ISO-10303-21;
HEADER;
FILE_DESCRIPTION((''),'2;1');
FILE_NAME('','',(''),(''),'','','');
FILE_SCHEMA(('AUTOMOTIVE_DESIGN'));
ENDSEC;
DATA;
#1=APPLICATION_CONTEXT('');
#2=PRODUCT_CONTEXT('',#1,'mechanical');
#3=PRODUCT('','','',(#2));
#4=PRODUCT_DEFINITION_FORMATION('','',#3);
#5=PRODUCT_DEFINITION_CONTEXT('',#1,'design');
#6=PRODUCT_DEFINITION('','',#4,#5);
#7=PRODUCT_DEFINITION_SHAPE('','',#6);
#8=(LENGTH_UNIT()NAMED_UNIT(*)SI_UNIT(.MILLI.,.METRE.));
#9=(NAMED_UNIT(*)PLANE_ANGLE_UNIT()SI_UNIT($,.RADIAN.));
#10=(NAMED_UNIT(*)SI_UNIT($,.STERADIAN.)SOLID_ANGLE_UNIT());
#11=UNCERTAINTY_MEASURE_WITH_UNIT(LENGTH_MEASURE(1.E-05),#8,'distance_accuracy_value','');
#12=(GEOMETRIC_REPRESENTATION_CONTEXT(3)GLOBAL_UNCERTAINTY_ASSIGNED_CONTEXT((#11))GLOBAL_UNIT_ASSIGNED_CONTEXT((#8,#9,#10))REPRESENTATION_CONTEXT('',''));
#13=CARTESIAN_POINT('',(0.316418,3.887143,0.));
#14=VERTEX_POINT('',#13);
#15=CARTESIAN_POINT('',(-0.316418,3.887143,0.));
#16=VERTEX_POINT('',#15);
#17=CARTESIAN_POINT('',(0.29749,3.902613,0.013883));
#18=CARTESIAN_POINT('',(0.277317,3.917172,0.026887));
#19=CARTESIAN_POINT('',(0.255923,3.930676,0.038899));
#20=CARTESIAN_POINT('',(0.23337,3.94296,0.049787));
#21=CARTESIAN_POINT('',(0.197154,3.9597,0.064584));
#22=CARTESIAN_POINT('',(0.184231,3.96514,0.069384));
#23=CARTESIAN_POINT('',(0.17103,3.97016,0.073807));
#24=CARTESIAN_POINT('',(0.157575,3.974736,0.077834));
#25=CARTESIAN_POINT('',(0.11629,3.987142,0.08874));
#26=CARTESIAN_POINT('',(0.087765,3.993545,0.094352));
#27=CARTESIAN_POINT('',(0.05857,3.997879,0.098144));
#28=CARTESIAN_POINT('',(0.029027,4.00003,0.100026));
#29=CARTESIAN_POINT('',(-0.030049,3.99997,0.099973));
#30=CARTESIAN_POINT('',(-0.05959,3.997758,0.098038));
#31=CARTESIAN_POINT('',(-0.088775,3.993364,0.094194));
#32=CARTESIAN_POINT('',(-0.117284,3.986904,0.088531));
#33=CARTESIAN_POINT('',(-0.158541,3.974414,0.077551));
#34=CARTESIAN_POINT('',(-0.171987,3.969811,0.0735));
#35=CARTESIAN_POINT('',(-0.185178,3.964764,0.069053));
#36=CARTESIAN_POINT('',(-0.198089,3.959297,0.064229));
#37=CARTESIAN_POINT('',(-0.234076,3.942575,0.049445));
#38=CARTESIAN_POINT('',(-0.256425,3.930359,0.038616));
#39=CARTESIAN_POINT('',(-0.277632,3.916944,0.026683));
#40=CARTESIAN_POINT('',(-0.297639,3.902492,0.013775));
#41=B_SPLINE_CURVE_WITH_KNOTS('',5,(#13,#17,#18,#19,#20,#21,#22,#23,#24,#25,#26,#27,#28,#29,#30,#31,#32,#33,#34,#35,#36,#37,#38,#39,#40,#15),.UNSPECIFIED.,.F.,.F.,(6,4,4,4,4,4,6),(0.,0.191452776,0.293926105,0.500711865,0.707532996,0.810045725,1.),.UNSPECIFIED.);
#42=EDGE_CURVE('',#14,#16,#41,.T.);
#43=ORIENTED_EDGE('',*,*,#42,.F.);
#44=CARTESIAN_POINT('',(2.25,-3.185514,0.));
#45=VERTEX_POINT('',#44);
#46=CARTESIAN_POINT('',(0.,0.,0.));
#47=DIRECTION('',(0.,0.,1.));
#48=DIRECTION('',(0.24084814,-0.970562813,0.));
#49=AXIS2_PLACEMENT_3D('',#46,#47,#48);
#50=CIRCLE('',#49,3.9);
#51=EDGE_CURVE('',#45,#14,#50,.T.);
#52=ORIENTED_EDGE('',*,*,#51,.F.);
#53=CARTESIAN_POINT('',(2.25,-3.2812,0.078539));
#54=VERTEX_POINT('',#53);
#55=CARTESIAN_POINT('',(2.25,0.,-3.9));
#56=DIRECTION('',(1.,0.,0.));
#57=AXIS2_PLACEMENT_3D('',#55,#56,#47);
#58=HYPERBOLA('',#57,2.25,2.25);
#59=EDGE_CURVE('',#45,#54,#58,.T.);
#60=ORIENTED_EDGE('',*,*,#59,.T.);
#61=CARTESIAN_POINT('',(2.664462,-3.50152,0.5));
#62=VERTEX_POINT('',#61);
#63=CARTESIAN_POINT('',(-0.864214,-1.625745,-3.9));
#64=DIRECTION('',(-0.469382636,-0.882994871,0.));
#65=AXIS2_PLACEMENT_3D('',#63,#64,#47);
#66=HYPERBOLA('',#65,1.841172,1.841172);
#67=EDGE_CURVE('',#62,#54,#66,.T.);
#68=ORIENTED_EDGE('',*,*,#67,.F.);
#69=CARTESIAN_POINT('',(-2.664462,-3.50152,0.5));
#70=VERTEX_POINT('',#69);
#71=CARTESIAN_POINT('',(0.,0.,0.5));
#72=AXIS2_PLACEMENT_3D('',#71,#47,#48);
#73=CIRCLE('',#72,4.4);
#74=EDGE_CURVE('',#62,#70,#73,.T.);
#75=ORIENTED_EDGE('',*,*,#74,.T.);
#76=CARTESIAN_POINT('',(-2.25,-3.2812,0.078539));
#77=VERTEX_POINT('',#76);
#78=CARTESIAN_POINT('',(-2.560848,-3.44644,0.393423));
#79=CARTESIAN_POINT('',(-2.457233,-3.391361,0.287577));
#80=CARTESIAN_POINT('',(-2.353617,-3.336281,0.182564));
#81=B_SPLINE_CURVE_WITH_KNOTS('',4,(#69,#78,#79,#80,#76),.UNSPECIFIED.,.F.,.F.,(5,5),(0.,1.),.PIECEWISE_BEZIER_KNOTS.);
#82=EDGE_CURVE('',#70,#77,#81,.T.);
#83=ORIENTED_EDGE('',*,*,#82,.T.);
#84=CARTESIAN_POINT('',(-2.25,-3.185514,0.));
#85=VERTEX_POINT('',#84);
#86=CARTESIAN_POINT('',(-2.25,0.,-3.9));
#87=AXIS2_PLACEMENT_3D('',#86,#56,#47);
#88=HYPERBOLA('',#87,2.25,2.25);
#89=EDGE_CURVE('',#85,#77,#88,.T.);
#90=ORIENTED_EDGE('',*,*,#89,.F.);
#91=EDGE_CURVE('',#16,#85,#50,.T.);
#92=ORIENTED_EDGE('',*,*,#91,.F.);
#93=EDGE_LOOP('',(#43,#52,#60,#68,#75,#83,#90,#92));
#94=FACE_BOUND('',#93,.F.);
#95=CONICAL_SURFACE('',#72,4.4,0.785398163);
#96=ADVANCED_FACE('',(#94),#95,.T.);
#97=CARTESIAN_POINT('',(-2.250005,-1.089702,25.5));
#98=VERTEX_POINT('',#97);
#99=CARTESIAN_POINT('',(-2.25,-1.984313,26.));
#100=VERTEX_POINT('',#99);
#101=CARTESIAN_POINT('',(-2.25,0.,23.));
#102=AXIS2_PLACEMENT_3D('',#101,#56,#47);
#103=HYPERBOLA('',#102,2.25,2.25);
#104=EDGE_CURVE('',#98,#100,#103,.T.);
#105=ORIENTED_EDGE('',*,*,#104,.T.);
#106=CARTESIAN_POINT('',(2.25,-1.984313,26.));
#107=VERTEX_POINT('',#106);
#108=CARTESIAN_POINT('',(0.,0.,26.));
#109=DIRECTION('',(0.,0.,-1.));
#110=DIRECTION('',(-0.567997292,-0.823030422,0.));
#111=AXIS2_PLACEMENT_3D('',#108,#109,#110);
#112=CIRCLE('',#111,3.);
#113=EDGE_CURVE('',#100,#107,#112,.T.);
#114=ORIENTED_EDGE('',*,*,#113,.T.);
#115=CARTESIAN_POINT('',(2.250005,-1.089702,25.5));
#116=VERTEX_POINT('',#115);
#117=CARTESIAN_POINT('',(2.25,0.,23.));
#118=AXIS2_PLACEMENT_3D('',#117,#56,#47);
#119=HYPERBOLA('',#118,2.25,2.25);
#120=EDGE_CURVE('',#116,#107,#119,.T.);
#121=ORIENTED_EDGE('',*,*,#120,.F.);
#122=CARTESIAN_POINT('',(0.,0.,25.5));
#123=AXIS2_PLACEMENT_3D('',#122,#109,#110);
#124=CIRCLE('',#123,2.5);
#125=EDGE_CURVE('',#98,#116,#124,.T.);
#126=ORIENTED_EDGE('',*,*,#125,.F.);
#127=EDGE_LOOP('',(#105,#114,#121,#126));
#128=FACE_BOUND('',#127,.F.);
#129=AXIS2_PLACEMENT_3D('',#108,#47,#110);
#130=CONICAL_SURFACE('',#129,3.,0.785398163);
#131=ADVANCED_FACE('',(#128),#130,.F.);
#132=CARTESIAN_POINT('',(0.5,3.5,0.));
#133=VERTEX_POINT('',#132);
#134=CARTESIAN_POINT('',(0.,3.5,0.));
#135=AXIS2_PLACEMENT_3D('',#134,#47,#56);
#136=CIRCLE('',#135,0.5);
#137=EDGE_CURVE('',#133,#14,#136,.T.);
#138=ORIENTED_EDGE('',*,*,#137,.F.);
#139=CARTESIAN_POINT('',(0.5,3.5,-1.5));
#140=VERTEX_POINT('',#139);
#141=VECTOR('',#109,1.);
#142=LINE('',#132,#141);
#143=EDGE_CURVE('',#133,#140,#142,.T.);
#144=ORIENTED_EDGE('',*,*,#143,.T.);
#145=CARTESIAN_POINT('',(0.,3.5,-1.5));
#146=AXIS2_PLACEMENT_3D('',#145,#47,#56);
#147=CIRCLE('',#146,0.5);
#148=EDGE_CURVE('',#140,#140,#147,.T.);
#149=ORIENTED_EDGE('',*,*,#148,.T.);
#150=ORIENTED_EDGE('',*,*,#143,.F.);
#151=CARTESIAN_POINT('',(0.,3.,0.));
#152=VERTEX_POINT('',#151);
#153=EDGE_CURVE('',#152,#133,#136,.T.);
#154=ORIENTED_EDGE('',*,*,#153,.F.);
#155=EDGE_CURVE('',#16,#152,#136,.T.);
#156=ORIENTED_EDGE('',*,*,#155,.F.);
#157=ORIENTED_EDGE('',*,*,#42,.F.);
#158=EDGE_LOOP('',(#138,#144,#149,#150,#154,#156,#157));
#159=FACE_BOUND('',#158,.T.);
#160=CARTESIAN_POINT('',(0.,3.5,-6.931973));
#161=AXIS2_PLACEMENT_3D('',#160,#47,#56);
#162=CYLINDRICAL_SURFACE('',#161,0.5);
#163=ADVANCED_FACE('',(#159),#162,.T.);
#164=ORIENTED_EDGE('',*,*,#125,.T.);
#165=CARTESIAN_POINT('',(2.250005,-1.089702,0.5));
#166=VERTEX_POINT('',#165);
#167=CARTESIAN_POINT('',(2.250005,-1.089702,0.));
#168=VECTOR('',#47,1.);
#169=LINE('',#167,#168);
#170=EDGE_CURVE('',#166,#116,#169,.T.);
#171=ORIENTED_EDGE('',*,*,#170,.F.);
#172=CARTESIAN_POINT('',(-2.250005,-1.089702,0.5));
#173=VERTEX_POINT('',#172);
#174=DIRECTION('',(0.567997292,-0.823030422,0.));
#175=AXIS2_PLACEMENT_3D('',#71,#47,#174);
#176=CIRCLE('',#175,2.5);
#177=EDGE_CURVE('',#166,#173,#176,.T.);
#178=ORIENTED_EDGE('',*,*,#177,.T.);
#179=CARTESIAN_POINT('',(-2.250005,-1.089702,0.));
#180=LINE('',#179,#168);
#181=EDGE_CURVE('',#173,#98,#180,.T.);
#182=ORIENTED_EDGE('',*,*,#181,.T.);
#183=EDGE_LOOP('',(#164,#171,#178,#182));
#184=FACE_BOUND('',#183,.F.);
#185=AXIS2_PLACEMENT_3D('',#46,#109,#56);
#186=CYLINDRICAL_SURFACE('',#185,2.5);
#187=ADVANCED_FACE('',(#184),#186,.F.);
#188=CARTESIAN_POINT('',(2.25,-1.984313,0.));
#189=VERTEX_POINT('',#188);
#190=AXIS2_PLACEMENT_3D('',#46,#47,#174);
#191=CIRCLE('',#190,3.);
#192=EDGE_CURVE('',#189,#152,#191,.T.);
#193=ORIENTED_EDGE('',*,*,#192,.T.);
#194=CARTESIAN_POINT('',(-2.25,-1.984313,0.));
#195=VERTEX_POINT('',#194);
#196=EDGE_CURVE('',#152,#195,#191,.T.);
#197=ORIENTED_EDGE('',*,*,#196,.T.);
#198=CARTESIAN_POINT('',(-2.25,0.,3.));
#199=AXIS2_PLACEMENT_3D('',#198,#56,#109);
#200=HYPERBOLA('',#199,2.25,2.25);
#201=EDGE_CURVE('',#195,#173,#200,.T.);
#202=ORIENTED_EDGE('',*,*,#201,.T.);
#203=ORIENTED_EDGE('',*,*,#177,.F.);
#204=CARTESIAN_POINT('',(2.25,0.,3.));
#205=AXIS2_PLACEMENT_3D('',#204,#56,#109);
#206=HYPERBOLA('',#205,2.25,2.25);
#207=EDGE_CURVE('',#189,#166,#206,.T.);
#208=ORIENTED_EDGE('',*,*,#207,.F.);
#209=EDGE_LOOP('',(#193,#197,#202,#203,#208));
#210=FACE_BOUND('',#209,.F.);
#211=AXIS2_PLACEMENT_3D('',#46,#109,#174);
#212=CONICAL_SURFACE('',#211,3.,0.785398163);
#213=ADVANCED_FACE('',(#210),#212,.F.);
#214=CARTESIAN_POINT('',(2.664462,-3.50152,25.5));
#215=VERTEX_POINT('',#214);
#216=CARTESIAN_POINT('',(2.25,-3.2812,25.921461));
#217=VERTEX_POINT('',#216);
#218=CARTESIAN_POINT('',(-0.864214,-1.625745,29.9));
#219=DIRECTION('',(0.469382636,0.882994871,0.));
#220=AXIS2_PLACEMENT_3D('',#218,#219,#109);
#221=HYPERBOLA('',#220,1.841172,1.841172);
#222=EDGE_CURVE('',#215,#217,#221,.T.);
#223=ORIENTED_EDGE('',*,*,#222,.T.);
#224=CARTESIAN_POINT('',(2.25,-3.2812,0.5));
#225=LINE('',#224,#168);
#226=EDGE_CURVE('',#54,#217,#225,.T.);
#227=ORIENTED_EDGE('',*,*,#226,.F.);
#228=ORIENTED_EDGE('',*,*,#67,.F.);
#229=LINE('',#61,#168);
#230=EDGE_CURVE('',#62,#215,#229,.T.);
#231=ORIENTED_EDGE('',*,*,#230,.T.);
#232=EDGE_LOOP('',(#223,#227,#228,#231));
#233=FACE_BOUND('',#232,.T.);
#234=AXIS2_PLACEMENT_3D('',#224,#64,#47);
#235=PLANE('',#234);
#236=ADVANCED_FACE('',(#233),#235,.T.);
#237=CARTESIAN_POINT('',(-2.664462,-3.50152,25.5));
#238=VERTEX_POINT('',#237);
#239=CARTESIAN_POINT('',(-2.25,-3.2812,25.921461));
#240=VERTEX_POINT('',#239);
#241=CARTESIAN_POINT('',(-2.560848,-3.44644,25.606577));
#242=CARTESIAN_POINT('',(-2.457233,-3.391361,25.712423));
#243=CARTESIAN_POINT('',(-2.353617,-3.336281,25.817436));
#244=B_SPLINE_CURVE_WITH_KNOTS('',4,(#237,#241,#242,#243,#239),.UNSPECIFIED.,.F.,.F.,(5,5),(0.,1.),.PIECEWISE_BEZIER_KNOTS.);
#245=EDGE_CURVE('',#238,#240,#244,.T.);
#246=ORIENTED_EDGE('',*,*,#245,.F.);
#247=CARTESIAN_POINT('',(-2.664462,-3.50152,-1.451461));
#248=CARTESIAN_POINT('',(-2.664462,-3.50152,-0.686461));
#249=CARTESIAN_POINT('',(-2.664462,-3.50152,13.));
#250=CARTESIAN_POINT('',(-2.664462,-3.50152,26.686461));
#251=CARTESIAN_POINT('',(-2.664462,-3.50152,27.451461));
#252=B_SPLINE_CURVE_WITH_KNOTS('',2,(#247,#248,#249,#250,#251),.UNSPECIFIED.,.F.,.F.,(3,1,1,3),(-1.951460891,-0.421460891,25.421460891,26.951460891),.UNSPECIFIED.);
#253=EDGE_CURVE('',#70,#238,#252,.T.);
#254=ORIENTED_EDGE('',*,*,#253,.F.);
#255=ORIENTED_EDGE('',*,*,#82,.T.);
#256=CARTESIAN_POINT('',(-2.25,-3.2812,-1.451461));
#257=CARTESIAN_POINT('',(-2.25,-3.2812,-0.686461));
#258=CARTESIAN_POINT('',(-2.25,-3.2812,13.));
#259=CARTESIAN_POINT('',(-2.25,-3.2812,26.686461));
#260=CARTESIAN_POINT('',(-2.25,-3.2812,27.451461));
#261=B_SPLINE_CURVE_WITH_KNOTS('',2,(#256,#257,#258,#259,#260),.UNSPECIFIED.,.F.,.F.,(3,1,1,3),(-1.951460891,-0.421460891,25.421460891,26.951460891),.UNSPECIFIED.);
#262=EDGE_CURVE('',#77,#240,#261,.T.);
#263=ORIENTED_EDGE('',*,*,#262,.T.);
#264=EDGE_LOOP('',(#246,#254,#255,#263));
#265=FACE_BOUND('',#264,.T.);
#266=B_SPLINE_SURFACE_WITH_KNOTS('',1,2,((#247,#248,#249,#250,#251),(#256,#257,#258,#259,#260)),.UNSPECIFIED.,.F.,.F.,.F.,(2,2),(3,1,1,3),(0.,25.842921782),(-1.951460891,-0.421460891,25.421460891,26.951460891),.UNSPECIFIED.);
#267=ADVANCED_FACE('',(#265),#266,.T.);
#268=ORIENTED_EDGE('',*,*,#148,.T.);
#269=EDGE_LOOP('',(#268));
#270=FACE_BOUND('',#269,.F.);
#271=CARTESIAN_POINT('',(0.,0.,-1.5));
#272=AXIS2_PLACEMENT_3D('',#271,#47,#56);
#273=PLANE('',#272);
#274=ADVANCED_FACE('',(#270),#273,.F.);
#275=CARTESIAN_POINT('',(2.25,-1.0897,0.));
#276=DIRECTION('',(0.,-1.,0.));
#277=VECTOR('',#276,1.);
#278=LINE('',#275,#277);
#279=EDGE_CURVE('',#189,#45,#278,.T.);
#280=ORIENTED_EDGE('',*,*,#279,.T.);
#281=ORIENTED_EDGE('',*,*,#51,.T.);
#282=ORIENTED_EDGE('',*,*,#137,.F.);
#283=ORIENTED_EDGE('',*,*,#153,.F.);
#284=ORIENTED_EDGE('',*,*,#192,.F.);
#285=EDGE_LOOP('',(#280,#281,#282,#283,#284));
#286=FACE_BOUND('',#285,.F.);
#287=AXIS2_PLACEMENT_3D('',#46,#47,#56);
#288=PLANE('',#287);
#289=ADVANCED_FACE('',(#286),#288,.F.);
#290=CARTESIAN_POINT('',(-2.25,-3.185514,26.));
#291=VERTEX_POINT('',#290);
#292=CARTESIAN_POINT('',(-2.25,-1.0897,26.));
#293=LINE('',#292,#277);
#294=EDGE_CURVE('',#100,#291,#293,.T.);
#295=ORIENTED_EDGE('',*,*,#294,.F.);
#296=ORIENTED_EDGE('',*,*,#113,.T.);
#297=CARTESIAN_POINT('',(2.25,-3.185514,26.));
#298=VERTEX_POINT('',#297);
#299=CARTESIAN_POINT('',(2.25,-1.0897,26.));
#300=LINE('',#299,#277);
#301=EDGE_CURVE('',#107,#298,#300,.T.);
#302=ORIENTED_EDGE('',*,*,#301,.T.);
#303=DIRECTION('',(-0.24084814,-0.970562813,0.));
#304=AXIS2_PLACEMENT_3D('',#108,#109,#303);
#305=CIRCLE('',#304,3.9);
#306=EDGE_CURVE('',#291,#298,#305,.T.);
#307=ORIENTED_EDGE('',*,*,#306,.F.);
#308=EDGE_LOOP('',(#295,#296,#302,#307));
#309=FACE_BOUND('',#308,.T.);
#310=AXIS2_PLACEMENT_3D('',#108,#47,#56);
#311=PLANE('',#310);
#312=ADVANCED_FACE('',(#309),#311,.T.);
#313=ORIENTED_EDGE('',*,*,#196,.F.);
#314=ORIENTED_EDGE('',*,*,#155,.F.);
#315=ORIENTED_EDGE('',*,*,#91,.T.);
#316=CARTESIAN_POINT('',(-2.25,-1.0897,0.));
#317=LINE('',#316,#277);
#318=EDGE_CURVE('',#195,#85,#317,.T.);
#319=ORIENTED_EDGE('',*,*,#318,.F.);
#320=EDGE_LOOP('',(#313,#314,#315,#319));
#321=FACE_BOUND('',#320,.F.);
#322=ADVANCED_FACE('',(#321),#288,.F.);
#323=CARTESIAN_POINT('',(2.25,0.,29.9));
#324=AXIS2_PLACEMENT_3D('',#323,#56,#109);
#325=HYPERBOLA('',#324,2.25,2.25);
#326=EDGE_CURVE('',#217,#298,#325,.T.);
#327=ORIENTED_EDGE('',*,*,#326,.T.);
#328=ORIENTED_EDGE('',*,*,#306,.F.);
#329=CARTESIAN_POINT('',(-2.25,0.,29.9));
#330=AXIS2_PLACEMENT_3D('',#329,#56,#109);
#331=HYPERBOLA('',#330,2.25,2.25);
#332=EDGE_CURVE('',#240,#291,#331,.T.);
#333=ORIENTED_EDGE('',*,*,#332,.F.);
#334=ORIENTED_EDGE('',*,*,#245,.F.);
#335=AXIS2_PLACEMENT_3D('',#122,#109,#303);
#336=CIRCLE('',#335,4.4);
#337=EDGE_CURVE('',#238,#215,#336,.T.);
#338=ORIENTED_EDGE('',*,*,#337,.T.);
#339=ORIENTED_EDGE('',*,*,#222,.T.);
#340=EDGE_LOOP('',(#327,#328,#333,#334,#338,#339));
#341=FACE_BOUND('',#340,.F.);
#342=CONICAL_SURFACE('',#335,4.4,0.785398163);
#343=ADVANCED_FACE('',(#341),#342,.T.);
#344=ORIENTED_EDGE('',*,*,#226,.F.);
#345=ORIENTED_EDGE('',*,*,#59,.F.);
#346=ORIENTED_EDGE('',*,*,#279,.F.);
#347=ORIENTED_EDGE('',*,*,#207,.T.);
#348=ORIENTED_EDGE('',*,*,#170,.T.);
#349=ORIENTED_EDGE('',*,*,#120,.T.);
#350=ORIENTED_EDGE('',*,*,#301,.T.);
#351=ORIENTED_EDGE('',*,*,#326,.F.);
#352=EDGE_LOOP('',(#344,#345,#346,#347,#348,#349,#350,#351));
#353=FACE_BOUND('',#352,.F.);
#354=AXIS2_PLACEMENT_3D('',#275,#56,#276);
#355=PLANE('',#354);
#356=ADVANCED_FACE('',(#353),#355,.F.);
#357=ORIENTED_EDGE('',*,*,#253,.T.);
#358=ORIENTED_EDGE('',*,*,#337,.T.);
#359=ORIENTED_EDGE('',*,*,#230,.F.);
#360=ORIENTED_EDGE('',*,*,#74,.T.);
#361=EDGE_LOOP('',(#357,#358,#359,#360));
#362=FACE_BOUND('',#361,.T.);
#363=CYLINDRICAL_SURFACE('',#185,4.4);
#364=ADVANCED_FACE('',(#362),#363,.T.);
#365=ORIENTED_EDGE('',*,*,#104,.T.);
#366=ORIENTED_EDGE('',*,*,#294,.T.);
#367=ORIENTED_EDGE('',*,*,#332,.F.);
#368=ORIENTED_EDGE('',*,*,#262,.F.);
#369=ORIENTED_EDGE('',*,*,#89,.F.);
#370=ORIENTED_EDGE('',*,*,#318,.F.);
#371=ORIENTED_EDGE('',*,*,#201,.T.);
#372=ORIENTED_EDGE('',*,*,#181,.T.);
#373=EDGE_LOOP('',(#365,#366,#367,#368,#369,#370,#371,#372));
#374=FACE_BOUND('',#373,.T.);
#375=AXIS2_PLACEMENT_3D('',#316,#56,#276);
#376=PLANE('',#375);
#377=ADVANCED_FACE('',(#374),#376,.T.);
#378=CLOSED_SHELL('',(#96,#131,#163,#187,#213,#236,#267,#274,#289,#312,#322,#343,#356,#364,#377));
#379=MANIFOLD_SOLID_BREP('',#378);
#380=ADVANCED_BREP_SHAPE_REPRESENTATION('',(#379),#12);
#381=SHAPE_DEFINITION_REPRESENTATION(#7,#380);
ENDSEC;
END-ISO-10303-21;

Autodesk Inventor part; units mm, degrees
ref_plane "YZ Plane" through (0, 0, 0) normal (1, 0, 0) x (0, 1, 0)
ref_plane "XZ Plane" through (0, 0, 0) normal (0, 1, 0) x (-1, 0, 0)
ref_plane "XY Plane" through (0, 0, 0) normal (0, 0, 1) x (1, 0, 0)
sketch "Sketch1" plane through (0, 0, 0) normal (0, 0, 1) x (1, 0, 0)
  line L0 (0, 6.16) -> (0, -6.16) construction
  line L1 (-6.16, 0) -> (6.16, 0) construction
  circle A0 centre (0, 0) radius 4.4
  circle A1 centre (0, 0) radius 2.5
  circle A2 centre (0, 3.5) radius 0.5
  line L2 (-2.25, -1.0897) -> (-2.25, -3.7812)
  line L3 (2.25, -1.0897) -> (2.25, -3.7812)
  point P0 (-2.25, -2.4355)
  dimension "d4" = 8.8
  dimension "d5" = 5
  dimension "d6" = 3.5
  dimension "d7" = 1
  dimension "d16" = 4.5
extrude "Extrusion3" add sketch "Sketch1" along normal blind 26 contours A0 L3 A1 L2 | A2 picked at (-2.534, -2.6638)
extrude "Extrusion4" add sketch "Sketch1" against normal blind 1.5 contours A2
chamfer "Chamfer1" distance 0.5 angle 45 4 edges at (0, 4.4, 0) (0, 2.5, 0) (0, 2.5, 26) (0, 4.4, 26)
chamfer "Chamfer2" distance 0.5 angle 45 2 edges at (2.25, -3.7812, 13) (-2.25, -3.7812, 13)
properties part number "Adjustment tool" material "ALMg4,5Mn-5083-(D54S)"
